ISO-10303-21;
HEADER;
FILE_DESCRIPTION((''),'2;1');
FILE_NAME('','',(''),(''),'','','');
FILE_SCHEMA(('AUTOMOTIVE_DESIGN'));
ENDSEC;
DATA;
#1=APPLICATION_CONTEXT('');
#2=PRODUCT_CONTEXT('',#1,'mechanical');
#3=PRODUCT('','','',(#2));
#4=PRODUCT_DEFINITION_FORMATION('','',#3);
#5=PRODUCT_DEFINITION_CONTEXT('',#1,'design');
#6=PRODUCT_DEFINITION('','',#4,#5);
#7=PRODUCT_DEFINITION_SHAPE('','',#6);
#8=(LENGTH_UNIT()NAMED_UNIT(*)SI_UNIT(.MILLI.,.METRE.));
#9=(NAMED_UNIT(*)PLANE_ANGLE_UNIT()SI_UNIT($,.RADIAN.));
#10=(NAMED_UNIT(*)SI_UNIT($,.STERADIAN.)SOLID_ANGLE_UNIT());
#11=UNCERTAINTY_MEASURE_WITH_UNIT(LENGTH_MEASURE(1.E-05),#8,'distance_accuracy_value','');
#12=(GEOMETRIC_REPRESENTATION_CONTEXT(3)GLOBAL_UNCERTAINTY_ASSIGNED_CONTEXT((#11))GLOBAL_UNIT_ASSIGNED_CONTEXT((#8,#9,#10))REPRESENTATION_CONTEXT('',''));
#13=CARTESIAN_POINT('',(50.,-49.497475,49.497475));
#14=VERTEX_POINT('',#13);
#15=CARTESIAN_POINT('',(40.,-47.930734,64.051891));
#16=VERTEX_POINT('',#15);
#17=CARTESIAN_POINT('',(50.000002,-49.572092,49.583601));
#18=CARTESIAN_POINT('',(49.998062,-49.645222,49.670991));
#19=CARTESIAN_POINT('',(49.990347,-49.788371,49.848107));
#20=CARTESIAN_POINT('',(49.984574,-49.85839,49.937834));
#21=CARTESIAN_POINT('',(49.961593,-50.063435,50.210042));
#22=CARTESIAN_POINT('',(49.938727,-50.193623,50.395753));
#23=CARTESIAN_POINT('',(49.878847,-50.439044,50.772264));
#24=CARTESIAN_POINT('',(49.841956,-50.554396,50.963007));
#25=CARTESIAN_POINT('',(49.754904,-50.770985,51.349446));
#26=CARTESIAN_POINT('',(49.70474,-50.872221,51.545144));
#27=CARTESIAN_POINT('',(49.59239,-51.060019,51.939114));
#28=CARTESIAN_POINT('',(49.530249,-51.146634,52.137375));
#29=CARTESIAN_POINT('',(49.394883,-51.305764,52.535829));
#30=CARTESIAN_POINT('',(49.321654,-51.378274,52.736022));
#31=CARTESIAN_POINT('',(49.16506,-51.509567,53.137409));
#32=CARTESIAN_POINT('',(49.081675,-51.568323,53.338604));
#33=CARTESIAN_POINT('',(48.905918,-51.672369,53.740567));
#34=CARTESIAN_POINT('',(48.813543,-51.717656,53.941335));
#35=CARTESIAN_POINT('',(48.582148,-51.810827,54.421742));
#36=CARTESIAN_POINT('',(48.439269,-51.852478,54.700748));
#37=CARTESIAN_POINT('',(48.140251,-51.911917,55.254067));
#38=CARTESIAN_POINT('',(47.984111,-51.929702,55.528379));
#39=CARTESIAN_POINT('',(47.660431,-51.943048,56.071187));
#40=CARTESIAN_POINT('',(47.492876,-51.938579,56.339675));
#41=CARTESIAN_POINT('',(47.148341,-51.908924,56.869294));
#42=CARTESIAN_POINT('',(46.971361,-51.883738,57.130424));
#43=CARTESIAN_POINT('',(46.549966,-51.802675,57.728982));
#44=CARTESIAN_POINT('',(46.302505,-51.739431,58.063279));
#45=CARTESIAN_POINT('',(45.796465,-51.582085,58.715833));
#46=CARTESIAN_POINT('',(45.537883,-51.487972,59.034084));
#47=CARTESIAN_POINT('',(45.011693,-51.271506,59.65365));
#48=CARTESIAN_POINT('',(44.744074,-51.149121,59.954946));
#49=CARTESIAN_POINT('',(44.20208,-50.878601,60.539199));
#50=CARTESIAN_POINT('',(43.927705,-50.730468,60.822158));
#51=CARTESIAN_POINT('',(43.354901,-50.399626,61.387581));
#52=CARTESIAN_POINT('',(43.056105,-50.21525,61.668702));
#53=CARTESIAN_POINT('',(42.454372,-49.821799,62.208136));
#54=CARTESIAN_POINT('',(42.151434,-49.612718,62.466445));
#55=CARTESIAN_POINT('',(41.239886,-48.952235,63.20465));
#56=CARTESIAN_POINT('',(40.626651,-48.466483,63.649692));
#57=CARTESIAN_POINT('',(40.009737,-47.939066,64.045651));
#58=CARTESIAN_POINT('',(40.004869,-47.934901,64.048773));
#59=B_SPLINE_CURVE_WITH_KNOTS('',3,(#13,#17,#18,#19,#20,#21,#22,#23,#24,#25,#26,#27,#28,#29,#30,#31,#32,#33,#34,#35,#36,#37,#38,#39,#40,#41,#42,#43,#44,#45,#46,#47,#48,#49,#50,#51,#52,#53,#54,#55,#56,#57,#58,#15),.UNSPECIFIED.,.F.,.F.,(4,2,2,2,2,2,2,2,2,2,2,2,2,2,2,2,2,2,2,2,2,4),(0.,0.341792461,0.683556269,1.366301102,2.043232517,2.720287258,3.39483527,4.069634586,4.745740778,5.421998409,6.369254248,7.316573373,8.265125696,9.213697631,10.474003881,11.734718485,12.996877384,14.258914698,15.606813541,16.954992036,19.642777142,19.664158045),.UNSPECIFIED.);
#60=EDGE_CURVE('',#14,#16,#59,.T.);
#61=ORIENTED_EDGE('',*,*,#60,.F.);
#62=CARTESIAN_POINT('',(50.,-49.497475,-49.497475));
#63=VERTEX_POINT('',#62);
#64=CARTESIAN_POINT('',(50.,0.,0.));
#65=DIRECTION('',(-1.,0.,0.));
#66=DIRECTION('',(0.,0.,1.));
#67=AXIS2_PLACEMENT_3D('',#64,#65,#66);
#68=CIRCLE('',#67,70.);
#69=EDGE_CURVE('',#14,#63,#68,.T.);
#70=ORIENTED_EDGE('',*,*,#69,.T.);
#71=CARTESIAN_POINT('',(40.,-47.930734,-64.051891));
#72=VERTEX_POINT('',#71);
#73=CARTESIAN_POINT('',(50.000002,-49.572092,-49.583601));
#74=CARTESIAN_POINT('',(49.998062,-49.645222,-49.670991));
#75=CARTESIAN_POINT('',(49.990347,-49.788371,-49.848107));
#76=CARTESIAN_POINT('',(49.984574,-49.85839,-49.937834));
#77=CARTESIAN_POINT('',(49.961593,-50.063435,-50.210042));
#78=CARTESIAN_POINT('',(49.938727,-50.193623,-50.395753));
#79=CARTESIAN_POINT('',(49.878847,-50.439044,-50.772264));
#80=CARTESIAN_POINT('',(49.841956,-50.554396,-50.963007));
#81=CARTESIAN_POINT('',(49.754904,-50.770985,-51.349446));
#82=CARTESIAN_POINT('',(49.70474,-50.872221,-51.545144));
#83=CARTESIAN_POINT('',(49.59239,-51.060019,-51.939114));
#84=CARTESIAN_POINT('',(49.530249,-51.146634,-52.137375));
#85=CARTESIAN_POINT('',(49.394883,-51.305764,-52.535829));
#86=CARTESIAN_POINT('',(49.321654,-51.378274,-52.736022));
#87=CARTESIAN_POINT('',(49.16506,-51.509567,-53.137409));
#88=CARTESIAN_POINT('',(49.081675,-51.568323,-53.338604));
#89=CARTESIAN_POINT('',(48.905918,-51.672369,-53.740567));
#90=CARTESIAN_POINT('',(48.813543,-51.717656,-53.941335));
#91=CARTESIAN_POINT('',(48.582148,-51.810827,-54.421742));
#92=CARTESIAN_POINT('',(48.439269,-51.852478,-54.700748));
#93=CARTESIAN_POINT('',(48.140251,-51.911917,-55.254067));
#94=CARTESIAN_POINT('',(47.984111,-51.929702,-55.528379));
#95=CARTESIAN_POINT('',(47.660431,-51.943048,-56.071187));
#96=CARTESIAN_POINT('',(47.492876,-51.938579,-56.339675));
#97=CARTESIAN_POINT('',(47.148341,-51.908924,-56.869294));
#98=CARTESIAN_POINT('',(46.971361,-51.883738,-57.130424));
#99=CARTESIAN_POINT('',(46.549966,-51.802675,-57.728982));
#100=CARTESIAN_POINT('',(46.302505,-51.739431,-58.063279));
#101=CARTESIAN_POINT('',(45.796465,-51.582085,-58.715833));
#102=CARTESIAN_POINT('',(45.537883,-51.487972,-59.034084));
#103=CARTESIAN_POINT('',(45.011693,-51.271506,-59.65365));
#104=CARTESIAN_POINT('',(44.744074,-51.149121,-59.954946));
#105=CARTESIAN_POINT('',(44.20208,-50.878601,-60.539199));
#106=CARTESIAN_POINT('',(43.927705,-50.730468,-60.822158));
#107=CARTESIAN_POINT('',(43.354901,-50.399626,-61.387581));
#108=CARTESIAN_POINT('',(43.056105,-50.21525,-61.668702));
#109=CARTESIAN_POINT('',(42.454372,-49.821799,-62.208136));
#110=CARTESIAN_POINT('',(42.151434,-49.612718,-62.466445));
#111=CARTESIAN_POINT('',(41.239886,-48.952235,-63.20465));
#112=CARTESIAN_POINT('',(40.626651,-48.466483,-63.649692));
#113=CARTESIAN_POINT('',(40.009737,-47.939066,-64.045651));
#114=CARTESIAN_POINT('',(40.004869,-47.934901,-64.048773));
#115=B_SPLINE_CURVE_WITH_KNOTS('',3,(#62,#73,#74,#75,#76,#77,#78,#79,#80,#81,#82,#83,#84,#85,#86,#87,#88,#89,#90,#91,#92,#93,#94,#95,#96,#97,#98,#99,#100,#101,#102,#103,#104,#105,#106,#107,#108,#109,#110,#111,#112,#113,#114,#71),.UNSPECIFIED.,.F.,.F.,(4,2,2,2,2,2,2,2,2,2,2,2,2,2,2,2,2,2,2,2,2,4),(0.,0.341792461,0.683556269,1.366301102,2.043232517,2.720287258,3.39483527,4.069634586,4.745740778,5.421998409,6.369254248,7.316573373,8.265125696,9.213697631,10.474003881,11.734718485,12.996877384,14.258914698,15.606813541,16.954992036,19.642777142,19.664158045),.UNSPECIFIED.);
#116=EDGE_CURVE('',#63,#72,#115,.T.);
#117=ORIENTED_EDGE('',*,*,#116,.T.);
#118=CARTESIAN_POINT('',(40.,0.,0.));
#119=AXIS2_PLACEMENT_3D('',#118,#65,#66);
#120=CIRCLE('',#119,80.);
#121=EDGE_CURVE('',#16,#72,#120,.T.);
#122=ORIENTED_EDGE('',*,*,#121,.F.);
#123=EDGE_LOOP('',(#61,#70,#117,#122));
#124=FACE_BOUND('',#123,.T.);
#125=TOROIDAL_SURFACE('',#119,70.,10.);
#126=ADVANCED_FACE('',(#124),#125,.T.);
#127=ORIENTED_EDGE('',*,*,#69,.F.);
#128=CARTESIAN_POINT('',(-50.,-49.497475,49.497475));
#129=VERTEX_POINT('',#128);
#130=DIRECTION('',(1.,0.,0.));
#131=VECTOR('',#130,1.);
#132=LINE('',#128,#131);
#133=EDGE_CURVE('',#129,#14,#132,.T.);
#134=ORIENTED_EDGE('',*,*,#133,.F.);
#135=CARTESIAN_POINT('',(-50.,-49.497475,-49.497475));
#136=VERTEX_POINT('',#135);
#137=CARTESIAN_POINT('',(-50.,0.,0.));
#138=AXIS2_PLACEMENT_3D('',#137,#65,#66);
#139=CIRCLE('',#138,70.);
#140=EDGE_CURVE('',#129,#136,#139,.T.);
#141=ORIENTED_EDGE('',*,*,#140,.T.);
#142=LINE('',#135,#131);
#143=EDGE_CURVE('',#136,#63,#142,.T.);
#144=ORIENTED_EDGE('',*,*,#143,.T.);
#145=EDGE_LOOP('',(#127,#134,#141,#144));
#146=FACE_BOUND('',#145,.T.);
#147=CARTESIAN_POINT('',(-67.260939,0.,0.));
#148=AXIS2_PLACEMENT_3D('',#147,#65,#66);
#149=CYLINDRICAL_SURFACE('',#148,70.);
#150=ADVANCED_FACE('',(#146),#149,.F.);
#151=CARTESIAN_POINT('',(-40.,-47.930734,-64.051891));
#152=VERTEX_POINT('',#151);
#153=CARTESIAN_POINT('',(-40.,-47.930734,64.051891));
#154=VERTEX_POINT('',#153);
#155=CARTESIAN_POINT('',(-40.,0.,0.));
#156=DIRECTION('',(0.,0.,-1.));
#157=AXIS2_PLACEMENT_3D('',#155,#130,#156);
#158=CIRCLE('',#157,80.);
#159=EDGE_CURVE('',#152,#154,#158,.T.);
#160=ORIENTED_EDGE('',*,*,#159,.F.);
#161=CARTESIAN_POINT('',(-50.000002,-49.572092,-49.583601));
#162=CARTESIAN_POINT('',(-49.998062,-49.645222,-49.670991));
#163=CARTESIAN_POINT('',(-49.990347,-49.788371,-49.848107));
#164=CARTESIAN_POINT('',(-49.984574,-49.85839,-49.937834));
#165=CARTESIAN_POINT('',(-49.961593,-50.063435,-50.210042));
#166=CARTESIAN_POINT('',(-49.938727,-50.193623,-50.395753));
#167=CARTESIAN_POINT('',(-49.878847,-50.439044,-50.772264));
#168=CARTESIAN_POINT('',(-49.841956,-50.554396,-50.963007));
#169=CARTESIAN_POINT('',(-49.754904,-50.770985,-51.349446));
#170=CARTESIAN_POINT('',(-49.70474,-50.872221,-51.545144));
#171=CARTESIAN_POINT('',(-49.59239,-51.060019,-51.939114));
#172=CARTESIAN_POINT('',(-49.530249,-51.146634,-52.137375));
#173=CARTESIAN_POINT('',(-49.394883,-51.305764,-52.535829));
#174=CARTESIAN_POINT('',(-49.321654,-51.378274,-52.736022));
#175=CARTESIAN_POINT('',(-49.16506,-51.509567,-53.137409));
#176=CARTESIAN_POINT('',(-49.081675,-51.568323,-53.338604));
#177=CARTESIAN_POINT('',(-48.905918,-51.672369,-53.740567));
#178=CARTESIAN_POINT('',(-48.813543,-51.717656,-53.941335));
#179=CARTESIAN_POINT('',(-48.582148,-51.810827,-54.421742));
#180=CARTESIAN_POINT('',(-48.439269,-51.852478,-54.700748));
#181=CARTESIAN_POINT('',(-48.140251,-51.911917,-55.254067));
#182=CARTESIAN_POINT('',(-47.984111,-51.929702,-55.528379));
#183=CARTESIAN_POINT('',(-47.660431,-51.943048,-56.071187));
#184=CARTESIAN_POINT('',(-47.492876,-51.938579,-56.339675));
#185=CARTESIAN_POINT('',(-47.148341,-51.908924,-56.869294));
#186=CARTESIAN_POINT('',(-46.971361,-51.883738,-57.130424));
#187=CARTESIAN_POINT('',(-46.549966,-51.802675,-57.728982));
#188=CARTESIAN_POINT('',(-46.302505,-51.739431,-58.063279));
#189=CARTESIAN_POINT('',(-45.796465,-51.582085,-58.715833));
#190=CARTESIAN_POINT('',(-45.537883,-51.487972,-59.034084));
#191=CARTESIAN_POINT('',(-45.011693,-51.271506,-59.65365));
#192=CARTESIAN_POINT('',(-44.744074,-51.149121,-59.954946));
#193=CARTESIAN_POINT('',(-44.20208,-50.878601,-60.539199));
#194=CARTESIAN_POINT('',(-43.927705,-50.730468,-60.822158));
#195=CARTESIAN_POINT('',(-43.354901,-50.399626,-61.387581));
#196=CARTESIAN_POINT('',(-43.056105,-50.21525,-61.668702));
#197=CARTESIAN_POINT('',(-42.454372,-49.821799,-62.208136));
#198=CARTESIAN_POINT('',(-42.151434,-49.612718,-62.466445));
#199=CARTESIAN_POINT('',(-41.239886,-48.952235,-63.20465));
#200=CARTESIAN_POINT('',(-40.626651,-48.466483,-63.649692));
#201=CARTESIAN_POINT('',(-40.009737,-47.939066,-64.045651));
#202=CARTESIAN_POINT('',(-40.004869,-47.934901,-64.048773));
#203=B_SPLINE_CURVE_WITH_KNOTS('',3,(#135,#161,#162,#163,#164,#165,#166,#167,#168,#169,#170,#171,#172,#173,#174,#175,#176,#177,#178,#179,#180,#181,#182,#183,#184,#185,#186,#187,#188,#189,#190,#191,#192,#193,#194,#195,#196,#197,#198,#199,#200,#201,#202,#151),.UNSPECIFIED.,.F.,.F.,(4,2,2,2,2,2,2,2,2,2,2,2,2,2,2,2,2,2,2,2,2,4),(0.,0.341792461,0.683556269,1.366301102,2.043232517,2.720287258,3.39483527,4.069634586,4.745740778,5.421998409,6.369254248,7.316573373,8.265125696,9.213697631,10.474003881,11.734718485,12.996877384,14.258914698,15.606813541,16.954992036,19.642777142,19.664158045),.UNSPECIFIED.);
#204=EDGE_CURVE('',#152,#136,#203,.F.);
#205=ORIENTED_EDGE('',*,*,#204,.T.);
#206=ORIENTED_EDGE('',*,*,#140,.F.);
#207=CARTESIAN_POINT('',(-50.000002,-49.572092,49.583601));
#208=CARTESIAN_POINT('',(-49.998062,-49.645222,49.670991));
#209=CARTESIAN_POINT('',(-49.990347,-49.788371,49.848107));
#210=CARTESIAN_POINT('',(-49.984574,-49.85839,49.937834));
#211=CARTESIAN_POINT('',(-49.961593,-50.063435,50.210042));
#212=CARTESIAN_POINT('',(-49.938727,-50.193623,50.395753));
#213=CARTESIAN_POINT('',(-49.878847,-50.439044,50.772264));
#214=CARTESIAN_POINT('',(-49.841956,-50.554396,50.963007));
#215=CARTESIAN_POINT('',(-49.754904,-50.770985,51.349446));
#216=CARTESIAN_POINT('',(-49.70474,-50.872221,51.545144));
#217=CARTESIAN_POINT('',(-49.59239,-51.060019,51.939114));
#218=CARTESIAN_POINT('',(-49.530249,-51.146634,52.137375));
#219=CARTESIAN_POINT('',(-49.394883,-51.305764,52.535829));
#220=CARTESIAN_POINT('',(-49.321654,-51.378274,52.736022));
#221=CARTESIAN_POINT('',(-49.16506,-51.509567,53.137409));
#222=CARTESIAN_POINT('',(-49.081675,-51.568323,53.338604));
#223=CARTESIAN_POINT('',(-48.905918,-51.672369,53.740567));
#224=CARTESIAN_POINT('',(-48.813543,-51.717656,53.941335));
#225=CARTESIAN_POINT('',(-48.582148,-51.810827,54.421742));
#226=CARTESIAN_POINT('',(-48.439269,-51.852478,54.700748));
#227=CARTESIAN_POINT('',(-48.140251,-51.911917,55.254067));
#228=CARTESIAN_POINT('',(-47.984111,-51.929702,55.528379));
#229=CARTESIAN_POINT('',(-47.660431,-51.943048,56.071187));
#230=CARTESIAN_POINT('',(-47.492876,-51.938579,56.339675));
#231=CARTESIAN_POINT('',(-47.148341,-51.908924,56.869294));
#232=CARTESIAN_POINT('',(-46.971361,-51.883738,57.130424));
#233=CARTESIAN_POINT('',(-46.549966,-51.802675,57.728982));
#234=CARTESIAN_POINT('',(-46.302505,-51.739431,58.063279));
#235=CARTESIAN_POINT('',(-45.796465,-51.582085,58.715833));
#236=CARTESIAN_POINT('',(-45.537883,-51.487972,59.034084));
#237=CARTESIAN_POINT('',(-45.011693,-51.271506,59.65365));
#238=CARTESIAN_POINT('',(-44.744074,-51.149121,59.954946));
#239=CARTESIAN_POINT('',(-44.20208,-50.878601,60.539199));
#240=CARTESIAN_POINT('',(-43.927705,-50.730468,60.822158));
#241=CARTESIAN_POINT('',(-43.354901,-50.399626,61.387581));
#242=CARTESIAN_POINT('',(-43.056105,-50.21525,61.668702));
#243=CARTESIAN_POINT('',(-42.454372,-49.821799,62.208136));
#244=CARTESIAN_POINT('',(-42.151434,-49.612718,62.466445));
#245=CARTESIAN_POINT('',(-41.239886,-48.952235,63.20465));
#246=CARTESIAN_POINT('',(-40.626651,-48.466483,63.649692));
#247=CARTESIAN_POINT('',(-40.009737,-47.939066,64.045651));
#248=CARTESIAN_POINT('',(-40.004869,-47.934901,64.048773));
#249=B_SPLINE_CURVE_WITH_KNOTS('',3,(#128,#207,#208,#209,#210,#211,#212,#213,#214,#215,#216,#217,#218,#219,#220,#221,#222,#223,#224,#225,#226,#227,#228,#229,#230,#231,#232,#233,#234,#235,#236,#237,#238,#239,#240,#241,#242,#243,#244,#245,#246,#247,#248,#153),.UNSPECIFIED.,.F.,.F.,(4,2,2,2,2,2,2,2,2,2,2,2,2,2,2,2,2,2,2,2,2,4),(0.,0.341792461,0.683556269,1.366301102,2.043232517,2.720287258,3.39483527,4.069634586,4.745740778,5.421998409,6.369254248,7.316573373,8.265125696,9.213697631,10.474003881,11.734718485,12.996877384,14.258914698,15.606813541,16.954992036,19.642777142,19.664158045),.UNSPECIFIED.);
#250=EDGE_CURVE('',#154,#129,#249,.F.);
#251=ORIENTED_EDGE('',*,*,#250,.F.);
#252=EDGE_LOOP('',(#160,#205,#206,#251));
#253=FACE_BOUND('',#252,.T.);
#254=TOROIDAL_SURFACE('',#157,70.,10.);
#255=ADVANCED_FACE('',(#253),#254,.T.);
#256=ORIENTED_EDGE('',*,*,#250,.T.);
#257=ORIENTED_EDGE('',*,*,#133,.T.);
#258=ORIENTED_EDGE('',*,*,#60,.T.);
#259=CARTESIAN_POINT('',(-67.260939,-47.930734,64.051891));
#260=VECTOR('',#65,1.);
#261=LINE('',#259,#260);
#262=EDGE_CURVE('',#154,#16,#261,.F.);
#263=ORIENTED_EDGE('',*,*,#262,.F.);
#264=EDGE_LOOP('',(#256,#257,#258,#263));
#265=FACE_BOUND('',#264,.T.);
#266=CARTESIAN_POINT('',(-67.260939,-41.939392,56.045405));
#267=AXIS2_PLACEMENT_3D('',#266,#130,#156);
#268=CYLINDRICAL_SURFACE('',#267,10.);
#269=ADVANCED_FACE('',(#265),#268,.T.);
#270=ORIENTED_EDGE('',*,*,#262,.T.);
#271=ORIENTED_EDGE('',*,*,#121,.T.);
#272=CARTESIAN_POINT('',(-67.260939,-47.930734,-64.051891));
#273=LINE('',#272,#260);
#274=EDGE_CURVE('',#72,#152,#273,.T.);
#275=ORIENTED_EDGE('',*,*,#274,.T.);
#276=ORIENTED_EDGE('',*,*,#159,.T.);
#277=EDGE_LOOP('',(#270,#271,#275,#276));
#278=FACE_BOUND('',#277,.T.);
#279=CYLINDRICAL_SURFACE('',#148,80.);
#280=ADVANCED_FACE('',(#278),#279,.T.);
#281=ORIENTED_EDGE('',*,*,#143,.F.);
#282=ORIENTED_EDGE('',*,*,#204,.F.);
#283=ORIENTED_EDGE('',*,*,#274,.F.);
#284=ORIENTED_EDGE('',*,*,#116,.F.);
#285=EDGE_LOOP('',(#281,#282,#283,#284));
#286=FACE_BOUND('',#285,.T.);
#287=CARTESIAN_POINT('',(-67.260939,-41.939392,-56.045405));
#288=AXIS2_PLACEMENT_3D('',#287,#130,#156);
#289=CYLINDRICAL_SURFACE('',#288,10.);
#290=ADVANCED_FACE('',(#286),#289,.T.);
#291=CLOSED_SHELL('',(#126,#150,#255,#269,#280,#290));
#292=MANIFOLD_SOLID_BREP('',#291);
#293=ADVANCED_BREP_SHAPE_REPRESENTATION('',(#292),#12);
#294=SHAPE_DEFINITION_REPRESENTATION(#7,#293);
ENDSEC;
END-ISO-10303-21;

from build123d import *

# Parameters (mm, degrees)
CROQUIS1_W        = 100
CROQUIS1_H        = 10
REVOLUCI_N1_ANGLE = 270
REDONDEO1_START   = -50
REDONDEO1_DEPTH   = 100


with BuildPart() as part:
    # Croquis1 → Revolución1 (revolve, symmetric)
    with BuildSketch(Plane.XY) as revoluci_n1_sk:
        with Locations((0, 75)):
            Rectangle(CROQUIS1_W, CROQUIS1_H)
    revolve(axis=Axis((-67.260939077, 0, 0), (1, 0, 0)), revolution_arc=REVOLUCI_N1_ANGLE / 2)
    revolve(revoluci_n1_sk.sketch, axis=Axis((-67.260939077, 0, 0), (-1, 0, 0)), revolution_arc=REVOLUCI_N1_ANGLE / 2)

    # Redondeo1: read off the stored shape, not the designer's step
    # Redondeo1 outline → Redondeo1 (cut)
    with BuildSketch(Plane.YZ.offset(REDONDEO1_START)):
        with BuildLine():
            ThreePointArc((-49.497474683, 49.497474683), (-51.881951338, 57.115692474), (-47.930733833, 64.051891105))
            ThreePointArc((-47.930733833, 64.051891105), (-52.383440274, 60.46466063), (-56.568542495, 56.568542495))
            Line((-56.568542495, 56.568542495), (-49.497474683, 49.497474683))
        make_face()
        with BuildLine():
            ThreePointArc((-47.930733833, -64.051891105), (-51.881951338, -57.115692474), (-49.497474683, -49.497474683))
            Line((-49.497474683, -49.497474683), (-56.568542495, -56.568542495))
            ThreePointArc((-56.568542495, -56.568542495), (-52.383440274, -60.46466063), (-47.930733833, -64.051891105))
        make_face()
    extrude(amount=REDONDEO1_DEPTH, mode=Mode.SUBTRACT)

    # Redondeo1 2 outline → Redondeo1 2 (revolve, cut)
    with BuildSketch(Plane.YX):
        with BuildLine():
            Line((80, 50), (70, 50))
            ThreePointArc((70, 50), (77.071067812, 47.071067812), (80, 40))
            Line((80, 40), (80, 50))
        make_face()
        with BuildLine():
            Line((80, -50), (80, -40))
            ThreePointArc((80, -40), (77.071067812, -47.071067812), (70, -50))
            Line((70, -50), (80, -50))
        make_face()
    revolve(axis=Axis((0, 0, 0), (1, 0, 0)), mode=Mode.SUBTRACT)


solid = part.part
